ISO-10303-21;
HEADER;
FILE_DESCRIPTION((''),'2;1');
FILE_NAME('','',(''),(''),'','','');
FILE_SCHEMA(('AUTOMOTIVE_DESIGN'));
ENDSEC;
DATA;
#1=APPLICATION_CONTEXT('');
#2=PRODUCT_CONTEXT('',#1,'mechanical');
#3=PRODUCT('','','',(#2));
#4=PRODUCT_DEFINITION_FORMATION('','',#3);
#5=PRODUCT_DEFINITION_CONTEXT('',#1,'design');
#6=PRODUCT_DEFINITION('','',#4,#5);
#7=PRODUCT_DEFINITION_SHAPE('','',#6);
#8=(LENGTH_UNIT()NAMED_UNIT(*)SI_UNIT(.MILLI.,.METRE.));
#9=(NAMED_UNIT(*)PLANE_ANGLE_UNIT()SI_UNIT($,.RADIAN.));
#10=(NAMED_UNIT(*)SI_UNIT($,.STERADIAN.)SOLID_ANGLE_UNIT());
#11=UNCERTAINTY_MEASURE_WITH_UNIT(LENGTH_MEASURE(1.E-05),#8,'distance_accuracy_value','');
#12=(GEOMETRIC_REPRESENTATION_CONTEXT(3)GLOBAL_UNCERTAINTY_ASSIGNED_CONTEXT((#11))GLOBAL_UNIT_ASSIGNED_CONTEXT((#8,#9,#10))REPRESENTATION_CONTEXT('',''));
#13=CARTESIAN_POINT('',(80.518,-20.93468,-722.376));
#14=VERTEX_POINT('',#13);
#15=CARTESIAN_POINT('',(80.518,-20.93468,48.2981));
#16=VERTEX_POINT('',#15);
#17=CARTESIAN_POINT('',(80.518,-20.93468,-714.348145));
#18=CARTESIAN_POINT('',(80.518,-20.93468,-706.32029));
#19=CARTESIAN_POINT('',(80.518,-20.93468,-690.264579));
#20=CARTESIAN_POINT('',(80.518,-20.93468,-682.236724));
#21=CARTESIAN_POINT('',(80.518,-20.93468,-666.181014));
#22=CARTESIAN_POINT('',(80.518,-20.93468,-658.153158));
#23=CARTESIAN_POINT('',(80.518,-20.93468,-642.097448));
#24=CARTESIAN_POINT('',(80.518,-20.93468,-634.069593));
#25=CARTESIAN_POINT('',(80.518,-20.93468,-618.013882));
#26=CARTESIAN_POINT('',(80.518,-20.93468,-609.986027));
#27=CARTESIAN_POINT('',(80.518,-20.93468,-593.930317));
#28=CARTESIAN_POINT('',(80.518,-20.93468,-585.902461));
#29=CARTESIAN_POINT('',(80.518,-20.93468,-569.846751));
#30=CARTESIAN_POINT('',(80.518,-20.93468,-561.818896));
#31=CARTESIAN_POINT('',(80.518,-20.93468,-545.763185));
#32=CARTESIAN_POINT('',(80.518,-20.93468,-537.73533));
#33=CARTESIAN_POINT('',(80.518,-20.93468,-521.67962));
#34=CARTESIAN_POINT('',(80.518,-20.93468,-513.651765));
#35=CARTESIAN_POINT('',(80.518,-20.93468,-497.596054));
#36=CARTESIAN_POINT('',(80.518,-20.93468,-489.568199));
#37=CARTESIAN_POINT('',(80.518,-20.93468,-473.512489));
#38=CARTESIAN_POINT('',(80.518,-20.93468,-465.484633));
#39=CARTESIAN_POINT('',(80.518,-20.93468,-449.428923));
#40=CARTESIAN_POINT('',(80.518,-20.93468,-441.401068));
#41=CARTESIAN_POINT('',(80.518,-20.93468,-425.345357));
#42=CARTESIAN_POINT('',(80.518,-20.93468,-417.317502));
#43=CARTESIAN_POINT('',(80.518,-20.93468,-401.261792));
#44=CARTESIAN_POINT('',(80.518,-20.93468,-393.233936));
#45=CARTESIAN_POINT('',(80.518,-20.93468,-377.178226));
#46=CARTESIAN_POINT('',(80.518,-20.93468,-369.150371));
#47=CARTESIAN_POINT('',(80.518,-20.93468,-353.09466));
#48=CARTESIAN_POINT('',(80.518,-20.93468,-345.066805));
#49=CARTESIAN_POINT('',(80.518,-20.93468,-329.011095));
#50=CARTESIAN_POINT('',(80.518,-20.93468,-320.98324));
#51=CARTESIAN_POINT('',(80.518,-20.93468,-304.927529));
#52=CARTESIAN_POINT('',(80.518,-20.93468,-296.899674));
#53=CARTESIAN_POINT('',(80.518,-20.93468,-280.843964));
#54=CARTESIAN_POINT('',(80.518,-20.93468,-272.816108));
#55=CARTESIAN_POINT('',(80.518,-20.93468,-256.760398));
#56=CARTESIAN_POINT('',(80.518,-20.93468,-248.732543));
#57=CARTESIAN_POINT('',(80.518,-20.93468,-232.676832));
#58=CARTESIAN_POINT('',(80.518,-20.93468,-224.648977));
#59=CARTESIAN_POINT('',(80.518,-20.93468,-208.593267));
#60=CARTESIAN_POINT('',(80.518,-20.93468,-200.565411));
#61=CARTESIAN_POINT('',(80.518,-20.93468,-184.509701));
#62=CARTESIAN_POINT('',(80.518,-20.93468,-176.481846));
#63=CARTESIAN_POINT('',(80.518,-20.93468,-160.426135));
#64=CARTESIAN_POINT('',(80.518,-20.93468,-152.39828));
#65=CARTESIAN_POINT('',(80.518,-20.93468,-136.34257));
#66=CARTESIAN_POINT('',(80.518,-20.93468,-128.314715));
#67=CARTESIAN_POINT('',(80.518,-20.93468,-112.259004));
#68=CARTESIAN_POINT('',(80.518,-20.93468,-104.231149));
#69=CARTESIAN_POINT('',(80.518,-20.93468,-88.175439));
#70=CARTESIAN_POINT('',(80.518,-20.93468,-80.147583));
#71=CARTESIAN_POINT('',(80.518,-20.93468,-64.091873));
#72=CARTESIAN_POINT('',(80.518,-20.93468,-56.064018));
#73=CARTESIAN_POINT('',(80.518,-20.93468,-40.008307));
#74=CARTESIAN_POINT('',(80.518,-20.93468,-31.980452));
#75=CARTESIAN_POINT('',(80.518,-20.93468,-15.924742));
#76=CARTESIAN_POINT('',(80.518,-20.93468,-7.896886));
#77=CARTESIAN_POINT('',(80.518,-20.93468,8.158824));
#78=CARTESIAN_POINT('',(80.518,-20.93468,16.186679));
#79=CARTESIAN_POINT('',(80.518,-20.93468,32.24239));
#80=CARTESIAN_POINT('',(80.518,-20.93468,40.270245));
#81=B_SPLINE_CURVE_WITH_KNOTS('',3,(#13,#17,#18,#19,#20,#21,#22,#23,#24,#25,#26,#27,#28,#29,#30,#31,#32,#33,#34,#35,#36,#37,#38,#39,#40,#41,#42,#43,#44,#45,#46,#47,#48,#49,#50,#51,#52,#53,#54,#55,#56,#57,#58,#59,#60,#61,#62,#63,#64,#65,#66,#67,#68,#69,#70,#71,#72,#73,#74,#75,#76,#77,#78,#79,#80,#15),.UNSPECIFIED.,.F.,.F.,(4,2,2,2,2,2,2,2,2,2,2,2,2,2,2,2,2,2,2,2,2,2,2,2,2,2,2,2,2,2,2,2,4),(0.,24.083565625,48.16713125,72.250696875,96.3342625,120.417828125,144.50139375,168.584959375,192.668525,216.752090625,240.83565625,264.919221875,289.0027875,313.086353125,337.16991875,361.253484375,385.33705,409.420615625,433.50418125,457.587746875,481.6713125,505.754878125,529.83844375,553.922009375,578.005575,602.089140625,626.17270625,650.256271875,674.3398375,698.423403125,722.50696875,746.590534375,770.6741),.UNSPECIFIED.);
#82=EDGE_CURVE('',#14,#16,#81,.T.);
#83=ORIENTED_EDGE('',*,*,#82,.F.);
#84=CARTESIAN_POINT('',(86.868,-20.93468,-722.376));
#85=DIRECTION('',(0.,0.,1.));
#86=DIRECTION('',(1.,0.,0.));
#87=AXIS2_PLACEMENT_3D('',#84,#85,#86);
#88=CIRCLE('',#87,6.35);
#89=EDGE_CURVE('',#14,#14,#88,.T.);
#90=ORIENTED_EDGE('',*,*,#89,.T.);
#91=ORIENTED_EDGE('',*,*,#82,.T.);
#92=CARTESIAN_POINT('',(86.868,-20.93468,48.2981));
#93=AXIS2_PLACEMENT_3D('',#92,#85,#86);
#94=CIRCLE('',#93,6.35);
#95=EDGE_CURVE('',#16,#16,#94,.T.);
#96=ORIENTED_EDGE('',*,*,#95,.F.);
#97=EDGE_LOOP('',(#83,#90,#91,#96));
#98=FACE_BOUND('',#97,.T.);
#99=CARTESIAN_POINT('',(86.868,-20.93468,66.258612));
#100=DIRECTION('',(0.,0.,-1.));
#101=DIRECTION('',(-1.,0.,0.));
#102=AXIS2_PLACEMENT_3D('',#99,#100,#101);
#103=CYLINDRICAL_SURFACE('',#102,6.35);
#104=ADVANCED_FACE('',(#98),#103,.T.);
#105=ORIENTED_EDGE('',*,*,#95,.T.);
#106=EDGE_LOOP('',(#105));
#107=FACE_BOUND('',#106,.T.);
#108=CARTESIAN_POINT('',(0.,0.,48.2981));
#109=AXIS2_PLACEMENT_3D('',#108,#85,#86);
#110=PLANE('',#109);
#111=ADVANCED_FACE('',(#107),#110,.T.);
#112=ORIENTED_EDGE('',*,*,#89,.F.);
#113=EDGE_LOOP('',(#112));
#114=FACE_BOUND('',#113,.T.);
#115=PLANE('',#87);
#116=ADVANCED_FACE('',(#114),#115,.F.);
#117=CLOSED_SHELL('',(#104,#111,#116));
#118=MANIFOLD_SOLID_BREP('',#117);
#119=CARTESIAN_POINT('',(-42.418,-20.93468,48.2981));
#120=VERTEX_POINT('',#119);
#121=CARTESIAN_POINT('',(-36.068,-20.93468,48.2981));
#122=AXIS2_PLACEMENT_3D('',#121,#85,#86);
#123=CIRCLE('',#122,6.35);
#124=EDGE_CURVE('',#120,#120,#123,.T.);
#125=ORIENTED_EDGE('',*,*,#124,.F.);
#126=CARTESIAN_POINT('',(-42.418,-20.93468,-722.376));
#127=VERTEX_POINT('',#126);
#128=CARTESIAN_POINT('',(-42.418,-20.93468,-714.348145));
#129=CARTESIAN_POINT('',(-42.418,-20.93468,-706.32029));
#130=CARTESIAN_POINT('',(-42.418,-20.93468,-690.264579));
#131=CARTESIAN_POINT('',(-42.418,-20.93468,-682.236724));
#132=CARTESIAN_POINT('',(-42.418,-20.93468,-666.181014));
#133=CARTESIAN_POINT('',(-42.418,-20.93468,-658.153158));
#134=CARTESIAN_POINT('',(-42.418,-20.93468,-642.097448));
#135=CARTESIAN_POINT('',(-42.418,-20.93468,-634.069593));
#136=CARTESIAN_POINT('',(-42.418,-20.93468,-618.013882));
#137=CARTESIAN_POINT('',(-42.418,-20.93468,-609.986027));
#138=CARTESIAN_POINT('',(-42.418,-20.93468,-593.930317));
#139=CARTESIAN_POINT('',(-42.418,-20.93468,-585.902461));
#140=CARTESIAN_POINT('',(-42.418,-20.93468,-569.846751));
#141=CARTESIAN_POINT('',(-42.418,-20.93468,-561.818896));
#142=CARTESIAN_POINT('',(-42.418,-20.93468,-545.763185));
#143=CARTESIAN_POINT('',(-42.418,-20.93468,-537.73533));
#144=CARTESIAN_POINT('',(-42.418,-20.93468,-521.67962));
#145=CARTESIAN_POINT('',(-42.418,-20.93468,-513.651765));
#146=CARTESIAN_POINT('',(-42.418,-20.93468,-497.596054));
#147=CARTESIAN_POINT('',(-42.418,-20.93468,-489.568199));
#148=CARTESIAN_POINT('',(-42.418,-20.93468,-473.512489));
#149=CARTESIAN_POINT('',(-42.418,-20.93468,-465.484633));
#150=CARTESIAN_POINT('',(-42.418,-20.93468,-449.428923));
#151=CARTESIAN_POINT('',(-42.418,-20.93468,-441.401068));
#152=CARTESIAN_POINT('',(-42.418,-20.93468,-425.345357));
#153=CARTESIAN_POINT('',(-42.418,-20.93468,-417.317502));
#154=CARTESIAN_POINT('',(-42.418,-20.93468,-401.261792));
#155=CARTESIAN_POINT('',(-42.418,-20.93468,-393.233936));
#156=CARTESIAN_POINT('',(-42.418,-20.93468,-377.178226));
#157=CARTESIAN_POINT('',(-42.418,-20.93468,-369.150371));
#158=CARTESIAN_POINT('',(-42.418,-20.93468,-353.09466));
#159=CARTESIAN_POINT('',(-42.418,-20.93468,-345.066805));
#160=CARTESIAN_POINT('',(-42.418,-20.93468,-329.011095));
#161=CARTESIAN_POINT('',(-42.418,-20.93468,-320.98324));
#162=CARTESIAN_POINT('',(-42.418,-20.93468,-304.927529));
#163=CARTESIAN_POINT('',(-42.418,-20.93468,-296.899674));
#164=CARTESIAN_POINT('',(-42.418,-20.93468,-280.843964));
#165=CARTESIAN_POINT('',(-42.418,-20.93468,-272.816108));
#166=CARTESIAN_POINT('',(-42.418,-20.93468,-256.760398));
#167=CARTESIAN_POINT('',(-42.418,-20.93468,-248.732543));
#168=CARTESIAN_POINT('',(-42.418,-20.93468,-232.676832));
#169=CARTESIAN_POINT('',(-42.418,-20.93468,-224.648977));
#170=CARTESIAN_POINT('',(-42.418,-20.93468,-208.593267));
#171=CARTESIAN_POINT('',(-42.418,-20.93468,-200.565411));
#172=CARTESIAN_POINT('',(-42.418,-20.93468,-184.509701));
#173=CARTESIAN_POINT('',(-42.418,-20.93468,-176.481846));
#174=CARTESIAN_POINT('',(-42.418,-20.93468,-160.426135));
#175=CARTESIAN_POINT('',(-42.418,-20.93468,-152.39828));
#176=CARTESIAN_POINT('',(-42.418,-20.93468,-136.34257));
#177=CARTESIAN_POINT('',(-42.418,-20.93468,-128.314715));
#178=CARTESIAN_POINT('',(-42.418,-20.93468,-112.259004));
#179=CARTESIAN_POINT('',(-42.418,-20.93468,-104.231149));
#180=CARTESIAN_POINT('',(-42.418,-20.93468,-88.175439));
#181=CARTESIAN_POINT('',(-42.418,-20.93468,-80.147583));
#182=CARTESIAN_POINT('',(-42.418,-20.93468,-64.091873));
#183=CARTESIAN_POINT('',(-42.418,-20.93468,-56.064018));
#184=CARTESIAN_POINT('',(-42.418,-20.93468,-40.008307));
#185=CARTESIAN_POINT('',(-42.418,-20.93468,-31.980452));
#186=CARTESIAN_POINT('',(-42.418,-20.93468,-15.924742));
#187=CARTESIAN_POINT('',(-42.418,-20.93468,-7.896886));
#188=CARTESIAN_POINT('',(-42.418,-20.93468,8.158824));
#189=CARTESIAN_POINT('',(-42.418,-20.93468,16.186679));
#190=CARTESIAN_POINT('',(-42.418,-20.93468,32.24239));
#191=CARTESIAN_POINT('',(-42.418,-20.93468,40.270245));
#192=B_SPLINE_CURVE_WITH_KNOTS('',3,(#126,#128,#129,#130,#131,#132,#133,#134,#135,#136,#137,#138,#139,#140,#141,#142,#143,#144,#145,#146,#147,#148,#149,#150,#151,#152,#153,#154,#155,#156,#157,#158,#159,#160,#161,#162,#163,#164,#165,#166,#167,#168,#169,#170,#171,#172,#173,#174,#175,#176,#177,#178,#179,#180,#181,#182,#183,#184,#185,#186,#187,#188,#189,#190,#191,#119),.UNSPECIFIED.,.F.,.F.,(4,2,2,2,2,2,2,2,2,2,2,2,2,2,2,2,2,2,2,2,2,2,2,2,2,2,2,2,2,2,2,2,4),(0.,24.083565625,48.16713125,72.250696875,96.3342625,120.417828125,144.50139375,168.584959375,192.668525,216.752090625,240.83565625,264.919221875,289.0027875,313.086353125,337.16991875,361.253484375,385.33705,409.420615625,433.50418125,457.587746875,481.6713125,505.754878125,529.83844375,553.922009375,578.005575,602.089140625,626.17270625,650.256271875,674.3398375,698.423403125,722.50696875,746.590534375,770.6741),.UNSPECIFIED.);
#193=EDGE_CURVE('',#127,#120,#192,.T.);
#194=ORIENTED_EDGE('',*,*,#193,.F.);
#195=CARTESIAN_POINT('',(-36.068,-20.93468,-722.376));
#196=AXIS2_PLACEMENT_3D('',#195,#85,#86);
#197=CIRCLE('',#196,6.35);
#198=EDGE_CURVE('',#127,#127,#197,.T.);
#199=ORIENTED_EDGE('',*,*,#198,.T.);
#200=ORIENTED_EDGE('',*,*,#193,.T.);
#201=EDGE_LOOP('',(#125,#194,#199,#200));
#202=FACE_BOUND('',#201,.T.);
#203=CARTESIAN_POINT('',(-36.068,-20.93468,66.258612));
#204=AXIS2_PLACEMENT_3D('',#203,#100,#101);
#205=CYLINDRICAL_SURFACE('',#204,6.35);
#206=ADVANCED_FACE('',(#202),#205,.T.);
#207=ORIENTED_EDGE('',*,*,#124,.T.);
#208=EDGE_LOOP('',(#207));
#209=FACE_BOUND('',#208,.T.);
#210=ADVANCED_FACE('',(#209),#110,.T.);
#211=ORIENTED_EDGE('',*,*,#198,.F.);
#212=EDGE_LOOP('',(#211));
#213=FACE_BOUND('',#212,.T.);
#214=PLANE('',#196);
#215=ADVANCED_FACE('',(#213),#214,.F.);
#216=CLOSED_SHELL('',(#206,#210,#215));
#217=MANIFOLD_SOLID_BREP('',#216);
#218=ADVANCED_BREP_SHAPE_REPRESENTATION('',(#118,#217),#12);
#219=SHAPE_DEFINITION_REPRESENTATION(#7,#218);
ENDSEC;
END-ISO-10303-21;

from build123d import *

# Parameters (mm, degrees)
BOSS_EXTRUDE2_OUTLINE_R   = 6.35
BOSS_EXTRUDE2_DEPTH       = 770.6741
BOSS_EXTRUDE2_2_OUTLINE_R = 6.35
BOSS_EXTRUDE2_2_DEPTH     = 770.6741


with BuildPart() as part:
    # Boss-Extrude2: read off the stored shape, not the designer's step
    # Boss-Extrude2 outline → Boss-Extrude2 (new body)
    with BuildSketch(Plane.XY.offset(-722.376)):
        with Locations((86.868, -20.93468)):
            Circle(BOSS_EXTRUDE2_OUTLINE_R)
    extrude(amount=BOSS_EXTRUDE2_DEPTH)


with BuildPart() as body_2:
    # Boss-Extrude2 2 outline → Boss-Extrude2 2 (new body)
    with BuildSketch(Plane.XY.offset(-722.376)):
        with Locations((-36.068, -20.93468)):
            Circle(BOSS_EXTRUDE2_2_OUTLINE_R)
    extrude(amount=BOSS_EXTRUDE2_2_DEPTH)


solid = Compound([part.part, body_2.part])
